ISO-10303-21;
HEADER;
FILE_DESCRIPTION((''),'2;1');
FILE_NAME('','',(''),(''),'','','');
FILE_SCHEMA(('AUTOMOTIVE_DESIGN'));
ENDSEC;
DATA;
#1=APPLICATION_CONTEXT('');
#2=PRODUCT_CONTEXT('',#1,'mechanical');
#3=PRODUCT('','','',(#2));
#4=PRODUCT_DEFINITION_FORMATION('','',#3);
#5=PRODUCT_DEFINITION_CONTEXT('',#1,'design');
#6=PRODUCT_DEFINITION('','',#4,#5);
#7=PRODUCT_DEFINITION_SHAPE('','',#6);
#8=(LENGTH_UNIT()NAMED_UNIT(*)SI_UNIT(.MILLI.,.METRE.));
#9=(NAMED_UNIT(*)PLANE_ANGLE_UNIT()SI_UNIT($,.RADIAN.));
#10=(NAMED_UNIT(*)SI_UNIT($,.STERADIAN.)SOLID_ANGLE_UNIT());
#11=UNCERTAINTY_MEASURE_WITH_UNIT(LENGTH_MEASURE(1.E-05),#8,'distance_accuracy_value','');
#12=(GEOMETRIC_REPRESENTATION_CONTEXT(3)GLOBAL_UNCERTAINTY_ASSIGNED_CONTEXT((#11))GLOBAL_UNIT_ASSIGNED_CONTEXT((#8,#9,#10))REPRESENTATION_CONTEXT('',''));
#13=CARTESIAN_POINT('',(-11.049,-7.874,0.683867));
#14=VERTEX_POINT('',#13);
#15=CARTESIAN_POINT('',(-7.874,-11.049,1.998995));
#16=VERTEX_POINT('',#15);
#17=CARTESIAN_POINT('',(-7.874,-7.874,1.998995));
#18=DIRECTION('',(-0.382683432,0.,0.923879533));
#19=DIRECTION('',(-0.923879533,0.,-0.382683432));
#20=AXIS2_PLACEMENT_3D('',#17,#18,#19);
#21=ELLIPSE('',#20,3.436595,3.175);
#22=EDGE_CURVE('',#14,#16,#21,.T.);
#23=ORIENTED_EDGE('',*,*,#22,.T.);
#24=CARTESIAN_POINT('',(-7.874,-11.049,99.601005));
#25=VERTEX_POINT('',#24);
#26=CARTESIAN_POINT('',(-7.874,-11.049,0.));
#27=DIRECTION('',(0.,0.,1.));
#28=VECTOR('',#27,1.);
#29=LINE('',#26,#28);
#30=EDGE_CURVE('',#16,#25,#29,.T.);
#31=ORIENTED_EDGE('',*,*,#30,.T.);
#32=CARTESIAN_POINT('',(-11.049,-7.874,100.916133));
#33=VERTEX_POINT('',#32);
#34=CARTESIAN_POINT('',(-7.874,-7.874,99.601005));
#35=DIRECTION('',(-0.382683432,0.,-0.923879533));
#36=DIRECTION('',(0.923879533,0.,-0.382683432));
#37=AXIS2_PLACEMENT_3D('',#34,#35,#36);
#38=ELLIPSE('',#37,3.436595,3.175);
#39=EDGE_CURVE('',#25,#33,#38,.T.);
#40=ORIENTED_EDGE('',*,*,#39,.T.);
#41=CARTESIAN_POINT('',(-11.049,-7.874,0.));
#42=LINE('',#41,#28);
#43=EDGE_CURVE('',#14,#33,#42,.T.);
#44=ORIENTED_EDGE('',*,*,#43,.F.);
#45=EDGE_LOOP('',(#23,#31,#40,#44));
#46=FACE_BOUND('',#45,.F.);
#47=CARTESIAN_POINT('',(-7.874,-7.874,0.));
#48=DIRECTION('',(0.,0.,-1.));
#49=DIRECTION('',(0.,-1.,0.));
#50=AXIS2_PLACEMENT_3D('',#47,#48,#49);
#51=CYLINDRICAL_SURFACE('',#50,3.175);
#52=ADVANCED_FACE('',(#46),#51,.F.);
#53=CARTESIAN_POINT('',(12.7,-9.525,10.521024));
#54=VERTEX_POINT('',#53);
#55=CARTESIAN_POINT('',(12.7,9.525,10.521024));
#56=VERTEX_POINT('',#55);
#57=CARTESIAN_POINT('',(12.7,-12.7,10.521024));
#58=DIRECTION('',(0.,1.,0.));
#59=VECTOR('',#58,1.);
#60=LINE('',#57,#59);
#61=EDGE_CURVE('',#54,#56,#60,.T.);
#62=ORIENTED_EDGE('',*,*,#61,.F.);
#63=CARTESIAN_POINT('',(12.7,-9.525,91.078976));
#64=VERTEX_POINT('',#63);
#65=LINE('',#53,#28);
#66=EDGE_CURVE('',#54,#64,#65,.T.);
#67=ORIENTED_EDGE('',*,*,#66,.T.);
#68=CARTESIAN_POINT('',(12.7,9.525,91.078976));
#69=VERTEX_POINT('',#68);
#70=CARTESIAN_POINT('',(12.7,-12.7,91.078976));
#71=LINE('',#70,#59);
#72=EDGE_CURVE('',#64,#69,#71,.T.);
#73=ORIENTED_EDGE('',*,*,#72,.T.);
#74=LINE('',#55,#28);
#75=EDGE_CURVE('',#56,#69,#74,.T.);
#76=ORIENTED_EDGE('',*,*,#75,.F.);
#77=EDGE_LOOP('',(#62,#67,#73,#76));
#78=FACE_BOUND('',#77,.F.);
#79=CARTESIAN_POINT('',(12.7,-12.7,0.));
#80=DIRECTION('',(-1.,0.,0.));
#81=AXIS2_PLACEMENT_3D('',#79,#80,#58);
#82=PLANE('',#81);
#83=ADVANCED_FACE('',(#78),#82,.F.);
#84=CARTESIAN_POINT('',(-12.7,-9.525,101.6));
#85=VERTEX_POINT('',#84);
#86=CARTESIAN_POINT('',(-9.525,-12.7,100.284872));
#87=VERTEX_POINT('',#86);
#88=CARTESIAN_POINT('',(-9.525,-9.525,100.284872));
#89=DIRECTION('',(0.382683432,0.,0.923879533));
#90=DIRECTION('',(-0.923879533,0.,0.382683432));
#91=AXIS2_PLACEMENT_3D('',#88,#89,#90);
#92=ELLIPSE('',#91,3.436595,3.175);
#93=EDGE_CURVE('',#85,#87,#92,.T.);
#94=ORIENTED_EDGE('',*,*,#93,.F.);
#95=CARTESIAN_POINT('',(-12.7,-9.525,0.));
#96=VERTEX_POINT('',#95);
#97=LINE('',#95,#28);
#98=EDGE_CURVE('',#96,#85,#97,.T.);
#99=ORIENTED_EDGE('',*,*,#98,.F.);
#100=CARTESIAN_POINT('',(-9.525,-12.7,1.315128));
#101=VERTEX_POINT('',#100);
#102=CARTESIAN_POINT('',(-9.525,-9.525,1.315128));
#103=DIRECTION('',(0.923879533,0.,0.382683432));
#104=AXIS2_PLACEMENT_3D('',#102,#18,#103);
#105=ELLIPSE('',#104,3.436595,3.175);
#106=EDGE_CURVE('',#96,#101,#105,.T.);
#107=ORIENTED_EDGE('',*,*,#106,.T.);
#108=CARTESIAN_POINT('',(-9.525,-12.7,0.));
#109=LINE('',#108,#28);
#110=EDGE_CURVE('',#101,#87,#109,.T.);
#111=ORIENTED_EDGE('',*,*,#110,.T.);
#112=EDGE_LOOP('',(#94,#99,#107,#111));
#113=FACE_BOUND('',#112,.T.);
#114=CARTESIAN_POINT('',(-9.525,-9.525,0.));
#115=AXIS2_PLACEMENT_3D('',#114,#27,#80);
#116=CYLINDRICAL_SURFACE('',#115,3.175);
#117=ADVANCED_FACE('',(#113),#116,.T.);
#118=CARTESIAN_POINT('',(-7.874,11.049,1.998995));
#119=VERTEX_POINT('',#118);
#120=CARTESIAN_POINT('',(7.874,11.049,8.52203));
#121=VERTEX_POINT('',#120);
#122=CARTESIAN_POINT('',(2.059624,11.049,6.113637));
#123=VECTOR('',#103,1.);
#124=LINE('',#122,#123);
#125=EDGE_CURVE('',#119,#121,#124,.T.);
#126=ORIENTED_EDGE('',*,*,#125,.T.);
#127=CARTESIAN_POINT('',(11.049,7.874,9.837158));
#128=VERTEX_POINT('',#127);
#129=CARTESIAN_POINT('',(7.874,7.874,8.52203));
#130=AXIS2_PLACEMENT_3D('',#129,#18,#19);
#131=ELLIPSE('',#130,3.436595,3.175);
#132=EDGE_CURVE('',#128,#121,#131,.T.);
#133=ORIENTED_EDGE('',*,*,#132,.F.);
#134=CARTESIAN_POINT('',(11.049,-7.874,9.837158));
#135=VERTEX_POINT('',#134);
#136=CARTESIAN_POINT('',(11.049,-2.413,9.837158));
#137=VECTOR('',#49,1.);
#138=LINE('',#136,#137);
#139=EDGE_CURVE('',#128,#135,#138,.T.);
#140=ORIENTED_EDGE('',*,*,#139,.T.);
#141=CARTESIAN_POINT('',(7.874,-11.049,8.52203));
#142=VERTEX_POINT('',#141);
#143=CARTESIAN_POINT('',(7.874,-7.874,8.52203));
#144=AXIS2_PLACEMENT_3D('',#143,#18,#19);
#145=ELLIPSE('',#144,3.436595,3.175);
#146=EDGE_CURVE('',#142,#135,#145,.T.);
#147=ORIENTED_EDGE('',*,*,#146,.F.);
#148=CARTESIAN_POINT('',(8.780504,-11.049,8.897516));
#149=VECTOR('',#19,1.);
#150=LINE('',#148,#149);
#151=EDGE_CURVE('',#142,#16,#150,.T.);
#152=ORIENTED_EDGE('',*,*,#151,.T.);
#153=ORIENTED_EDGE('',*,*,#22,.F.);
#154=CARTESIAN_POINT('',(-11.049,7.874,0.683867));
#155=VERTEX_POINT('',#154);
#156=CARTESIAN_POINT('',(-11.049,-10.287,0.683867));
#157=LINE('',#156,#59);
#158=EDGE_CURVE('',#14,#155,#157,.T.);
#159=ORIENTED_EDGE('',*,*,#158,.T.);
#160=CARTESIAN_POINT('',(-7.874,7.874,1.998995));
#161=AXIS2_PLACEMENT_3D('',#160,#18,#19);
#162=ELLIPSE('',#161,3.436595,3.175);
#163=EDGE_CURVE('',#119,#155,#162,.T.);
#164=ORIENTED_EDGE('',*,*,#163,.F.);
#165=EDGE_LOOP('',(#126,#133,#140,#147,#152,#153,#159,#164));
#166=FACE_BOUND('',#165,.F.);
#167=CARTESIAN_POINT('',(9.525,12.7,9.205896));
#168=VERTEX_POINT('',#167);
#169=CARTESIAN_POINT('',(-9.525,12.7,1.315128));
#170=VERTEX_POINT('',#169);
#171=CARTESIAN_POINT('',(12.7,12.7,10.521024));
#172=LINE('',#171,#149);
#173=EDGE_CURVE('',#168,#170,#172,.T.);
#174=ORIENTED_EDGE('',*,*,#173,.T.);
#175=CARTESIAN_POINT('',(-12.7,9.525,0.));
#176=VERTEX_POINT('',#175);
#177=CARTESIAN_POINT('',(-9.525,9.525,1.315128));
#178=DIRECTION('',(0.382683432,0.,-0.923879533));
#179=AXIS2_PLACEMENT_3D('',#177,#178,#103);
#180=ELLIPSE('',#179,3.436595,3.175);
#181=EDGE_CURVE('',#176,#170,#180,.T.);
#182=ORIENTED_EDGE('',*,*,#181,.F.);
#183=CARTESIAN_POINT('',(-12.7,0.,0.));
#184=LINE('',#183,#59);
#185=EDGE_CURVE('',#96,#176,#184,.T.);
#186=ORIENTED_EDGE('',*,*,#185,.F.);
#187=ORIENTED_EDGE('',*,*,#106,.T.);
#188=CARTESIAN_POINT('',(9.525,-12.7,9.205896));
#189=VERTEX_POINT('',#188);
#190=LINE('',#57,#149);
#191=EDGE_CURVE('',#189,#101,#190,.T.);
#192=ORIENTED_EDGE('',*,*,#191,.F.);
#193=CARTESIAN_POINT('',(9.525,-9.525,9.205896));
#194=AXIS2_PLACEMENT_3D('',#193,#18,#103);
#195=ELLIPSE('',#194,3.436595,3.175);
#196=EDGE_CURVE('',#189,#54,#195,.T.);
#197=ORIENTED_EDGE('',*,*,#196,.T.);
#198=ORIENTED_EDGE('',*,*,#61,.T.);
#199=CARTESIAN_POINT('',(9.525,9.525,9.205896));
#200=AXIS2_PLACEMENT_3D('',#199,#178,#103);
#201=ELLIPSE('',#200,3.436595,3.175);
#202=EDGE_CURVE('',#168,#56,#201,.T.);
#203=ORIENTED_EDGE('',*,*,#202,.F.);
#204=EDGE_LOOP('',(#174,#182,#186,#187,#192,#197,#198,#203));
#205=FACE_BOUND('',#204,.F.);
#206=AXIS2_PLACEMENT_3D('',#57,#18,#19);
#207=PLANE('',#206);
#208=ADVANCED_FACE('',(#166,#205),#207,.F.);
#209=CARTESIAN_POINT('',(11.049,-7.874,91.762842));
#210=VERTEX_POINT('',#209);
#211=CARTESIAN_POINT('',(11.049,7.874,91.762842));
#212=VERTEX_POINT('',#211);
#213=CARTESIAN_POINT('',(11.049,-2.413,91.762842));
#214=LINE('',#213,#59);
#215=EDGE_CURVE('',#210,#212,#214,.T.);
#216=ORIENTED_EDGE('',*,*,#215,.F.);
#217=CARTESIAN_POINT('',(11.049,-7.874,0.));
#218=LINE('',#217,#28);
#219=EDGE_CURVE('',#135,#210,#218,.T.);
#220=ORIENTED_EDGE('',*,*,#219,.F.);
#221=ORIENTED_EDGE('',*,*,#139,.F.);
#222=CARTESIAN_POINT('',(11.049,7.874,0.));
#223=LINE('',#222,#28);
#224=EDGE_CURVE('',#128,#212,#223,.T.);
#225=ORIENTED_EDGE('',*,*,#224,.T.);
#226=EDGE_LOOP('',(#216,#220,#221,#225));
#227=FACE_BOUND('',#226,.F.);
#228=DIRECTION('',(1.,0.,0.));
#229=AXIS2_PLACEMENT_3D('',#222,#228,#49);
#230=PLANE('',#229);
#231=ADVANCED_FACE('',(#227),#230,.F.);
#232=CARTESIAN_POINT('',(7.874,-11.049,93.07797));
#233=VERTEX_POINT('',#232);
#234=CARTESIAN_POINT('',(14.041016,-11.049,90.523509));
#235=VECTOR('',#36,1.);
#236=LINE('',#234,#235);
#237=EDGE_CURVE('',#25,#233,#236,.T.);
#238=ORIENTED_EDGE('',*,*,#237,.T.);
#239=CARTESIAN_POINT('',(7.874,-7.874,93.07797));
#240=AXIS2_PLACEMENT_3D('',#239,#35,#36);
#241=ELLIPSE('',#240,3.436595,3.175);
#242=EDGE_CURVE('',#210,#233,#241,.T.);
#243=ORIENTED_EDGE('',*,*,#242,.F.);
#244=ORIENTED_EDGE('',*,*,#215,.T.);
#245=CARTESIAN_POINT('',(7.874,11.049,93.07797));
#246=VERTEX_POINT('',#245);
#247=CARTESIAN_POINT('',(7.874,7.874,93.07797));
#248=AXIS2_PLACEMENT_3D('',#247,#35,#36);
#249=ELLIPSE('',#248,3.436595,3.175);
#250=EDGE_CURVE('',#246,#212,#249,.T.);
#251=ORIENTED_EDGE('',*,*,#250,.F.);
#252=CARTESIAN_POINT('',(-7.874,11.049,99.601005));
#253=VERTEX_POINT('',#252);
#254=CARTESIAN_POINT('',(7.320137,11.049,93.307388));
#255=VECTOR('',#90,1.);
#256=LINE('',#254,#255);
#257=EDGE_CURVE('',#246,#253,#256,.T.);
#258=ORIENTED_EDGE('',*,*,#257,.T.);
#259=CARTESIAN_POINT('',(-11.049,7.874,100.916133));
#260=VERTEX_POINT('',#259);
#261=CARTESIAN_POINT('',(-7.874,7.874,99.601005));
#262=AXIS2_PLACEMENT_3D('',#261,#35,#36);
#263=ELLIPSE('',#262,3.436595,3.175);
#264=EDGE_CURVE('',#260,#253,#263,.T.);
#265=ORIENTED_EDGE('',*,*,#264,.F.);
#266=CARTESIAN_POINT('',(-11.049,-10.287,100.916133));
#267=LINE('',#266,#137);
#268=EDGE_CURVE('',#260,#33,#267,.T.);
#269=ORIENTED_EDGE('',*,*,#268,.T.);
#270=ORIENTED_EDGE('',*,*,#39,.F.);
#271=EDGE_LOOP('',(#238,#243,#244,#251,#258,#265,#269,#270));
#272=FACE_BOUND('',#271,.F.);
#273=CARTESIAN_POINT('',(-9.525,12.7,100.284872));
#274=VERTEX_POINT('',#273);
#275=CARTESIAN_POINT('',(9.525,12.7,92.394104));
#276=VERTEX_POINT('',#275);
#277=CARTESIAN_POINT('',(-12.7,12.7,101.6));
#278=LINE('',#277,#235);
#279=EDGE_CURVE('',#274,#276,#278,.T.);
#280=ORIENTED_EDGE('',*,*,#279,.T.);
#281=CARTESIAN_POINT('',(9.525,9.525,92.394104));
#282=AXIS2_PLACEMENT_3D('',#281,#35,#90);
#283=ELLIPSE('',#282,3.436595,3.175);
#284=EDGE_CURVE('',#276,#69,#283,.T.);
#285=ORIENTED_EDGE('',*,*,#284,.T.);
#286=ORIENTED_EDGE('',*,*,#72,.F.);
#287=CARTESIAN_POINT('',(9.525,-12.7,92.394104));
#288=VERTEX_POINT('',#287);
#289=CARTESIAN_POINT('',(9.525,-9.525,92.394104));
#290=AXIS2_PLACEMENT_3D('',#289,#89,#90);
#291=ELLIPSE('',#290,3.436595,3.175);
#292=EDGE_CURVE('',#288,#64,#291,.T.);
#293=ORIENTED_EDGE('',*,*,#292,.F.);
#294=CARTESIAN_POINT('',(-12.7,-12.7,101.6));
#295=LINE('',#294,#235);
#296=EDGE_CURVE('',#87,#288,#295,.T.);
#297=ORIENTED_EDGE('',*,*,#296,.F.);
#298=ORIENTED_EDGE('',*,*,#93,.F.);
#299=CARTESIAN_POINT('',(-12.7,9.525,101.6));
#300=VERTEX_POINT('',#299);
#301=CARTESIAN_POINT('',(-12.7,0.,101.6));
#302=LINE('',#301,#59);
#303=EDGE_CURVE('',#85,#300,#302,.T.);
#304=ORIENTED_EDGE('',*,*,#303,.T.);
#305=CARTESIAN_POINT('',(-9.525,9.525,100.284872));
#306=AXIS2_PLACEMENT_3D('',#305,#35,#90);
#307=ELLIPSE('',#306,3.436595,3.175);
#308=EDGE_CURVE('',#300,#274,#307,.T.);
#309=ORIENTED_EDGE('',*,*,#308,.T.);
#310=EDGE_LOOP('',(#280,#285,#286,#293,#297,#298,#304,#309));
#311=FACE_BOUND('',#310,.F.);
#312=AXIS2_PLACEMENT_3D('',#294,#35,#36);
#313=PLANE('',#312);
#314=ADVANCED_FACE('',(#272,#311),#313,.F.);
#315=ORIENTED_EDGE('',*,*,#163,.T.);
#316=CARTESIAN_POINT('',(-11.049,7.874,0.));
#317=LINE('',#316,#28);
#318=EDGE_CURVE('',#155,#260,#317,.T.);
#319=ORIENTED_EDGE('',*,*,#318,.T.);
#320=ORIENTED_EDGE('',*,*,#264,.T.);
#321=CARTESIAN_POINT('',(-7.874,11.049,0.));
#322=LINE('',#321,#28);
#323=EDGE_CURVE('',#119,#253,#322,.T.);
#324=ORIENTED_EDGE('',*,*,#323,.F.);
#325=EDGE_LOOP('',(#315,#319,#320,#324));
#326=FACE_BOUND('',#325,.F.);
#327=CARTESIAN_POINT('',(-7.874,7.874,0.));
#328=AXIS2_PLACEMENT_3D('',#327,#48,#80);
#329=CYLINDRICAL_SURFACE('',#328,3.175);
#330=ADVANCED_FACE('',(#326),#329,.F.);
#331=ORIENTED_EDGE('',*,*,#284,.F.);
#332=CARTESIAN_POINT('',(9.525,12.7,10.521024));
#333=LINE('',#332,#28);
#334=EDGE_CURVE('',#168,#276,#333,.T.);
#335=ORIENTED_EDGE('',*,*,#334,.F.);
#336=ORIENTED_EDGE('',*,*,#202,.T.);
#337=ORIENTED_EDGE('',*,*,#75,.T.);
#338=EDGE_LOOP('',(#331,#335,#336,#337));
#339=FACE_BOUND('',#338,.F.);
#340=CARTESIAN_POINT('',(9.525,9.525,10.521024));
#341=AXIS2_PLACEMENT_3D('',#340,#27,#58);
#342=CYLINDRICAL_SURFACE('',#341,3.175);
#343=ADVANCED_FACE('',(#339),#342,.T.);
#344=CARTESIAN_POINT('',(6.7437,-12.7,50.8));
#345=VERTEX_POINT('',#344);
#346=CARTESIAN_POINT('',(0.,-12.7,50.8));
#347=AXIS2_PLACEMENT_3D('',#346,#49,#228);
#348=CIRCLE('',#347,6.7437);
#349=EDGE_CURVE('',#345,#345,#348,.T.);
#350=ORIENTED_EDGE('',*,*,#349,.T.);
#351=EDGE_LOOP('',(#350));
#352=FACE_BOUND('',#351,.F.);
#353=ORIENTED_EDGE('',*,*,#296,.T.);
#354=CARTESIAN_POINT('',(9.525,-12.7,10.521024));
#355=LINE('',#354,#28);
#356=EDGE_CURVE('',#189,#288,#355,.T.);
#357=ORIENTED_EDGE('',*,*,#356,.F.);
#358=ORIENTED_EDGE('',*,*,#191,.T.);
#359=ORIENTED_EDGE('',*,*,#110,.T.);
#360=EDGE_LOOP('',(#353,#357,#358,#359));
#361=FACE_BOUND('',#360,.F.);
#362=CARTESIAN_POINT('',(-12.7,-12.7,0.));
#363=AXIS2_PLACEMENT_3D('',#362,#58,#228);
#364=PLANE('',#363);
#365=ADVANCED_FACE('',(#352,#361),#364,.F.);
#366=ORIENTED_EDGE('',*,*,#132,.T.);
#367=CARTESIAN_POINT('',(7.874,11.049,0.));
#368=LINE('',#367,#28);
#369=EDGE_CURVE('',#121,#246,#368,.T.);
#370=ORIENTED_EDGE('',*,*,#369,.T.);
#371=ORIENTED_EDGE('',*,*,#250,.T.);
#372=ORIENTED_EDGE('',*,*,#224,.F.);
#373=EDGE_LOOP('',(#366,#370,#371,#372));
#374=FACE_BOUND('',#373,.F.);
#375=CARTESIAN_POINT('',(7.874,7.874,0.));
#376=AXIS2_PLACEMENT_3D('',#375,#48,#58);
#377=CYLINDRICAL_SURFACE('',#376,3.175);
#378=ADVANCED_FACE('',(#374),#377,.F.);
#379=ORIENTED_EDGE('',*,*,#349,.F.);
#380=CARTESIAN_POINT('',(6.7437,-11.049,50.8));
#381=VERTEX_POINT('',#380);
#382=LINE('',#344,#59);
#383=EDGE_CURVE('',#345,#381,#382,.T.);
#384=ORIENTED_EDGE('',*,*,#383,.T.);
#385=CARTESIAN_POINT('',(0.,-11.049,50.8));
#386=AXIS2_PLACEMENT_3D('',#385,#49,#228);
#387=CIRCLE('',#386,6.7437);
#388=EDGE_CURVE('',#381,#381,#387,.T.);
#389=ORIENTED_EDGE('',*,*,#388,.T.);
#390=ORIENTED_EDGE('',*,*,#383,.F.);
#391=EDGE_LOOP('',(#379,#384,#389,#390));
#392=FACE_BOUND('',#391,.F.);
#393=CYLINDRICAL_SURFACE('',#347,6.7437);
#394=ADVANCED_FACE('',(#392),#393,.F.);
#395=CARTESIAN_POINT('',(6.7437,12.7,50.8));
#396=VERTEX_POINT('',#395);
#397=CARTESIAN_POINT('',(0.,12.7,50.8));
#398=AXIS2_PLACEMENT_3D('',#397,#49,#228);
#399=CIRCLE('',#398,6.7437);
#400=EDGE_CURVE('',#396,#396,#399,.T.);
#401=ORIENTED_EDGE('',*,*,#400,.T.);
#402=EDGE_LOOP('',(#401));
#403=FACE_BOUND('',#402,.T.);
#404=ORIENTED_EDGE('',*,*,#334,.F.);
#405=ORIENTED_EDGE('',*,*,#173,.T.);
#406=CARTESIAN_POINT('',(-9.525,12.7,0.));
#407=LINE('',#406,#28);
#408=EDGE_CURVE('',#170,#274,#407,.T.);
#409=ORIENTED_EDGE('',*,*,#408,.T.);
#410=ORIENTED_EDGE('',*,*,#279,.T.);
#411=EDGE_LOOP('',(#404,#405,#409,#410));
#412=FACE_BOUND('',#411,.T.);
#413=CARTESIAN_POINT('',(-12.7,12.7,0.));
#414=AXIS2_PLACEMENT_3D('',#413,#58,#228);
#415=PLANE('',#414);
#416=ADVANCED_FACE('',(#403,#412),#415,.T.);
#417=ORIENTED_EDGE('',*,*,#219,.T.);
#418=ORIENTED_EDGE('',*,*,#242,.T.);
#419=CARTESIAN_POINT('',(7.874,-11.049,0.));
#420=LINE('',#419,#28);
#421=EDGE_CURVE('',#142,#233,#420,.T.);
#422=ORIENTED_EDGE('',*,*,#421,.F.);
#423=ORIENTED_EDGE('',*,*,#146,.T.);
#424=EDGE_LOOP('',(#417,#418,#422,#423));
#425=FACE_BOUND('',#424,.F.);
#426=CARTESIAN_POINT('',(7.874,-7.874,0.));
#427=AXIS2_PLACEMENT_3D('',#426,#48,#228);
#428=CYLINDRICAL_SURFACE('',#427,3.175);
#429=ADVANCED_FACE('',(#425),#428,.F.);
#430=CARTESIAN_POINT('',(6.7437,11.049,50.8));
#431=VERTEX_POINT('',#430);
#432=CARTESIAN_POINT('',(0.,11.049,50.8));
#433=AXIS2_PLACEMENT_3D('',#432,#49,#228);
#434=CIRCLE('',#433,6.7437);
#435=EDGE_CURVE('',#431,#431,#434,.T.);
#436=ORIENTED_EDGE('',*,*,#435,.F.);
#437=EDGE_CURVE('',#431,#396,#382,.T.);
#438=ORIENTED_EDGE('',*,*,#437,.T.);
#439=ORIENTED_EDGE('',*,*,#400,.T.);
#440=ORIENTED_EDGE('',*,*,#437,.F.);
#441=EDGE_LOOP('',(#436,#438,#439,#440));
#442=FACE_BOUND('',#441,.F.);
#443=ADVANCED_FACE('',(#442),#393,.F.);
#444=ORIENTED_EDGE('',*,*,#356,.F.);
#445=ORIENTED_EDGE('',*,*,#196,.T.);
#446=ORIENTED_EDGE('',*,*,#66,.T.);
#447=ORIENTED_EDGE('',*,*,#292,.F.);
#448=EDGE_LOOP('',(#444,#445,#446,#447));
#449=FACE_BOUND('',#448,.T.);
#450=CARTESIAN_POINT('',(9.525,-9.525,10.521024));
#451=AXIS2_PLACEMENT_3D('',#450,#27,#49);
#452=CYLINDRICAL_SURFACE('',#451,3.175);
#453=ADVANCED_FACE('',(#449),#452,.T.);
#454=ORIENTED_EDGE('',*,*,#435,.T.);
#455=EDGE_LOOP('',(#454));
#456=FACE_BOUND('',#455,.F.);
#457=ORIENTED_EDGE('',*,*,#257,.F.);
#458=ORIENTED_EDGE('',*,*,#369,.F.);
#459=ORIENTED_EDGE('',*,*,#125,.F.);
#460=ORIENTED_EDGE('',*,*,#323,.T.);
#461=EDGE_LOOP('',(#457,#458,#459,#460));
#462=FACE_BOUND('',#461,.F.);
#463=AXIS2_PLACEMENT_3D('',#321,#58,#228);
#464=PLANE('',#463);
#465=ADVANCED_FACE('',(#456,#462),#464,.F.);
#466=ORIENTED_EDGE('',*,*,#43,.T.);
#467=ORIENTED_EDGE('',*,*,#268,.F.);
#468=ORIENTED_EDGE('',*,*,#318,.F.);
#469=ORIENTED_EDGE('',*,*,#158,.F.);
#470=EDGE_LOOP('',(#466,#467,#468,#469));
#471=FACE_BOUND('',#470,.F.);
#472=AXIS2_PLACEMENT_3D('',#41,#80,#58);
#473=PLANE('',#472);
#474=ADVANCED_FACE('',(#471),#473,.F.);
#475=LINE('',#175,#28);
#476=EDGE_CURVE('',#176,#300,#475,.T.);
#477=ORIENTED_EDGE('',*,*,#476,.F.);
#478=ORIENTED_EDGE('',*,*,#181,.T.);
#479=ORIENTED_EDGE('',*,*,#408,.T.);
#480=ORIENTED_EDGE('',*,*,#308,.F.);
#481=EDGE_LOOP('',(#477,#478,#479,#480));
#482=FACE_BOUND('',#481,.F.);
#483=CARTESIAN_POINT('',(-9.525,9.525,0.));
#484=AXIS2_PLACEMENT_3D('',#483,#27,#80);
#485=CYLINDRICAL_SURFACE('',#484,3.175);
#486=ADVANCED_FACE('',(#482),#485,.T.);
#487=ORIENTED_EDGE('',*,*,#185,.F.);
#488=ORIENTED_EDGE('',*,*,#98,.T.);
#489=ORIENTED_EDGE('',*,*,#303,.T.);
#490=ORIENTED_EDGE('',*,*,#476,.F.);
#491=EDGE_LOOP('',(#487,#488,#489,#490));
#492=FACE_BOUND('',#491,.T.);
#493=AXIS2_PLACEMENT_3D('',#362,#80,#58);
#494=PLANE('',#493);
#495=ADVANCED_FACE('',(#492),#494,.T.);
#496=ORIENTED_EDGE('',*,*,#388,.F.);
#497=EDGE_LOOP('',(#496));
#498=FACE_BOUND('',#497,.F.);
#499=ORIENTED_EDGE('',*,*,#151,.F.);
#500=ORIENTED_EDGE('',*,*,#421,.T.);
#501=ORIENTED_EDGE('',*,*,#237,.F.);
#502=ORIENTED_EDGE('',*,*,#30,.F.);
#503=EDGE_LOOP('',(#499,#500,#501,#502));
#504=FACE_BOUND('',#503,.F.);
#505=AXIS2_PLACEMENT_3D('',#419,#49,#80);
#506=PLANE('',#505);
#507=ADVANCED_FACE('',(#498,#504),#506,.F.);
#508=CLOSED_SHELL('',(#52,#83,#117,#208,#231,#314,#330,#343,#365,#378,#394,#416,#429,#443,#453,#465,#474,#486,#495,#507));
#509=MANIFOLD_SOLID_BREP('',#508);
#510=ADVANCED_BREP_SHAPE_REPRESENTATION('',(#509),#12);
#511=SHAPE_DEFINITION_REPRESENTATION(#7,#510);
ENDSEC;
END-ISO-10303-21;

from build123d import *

# Parameters (mm, degrees)
F1_W     = 25.4
F1_H     = 25.4
F2_DEPTH = 101.6
F4_DEPTH = 25.4
F5_R     = 3.175
F6_R     = 6.7437
F7_DEPTH = 25.401


# Not quite as in the source:
# - a variable given as a bare number and used for a length is read in inches; the dataset says mm whatever the document's units were


with BuildPart() as f2:
    # F1 (on Top) → F2 (new body)
    with BuildSketch(Plane.XY):
        Rectangle(F1_W, F1_H)
        with BuildLine():
            ThreePointArc((-11.049, 7.874), (-10.1190640303, 10.1190640303), (-7.874, 11.049))
            Line((-7.874, 11.049), (7.874, 11.049))
            ThreePointArc((7.874, 11.049), (10.1190640303, 10.1190640303), (11.049, 7.874))
            Line((11.049, 7.874), (11.049, -7.874))
            ThreePointArc((11.049, -7.874), (10.1190640303, -10.1190640303), (7.874, -11.049))
            Line((7.874, -11.049), (-7.874, -11.049))
            ThreePointArc((-7.874, -11.049), (-10.1190640303, -10.1190640303), (-11.049, -7.874))
            Line((-11.049, -7.874), (-11.049, 7.874))
        make_face(mode=Mode.SUBTRACT)
    extrude(amount=F2_DEPTH)

    # F3 (on face) → F4 (cut)
    with BuildSketch(Plane.XZ.offset(12.7)):
        Polygon((12.7, 10.5210244843), (-12.7, 0), (12.7, 0), align=None)
        Polygon((12.7, 101.6), (-12.7, 101.6), (12.7, 91.0789755157), align=None)
    extrude(amount=-F4_DEPTH, mode=Mode.SUBTRACT)

    # F5
    f5_edges = [f2.edges().sort_by_distance(p)[0] for p in [
        (-12.7, 12.7, 50.8),
        (12.7, 12.7, 50.8),
        (-12.7, -12.7, 50.8),
        (12.7, -12.7, 50.8),
    ]]
    fillet(f5_edges, radius=F5_R)

    # F6 (on face) → F7 (cut, through all)
    with BuildSketch(Plane.XZ.offset(12.7)):
        with Locations((0, 50.8)):
            Circle(F6_R)
    extrude(amount=-F7_DEPTH, mode=Mode.SUBTRACT)


solid = f2.part
